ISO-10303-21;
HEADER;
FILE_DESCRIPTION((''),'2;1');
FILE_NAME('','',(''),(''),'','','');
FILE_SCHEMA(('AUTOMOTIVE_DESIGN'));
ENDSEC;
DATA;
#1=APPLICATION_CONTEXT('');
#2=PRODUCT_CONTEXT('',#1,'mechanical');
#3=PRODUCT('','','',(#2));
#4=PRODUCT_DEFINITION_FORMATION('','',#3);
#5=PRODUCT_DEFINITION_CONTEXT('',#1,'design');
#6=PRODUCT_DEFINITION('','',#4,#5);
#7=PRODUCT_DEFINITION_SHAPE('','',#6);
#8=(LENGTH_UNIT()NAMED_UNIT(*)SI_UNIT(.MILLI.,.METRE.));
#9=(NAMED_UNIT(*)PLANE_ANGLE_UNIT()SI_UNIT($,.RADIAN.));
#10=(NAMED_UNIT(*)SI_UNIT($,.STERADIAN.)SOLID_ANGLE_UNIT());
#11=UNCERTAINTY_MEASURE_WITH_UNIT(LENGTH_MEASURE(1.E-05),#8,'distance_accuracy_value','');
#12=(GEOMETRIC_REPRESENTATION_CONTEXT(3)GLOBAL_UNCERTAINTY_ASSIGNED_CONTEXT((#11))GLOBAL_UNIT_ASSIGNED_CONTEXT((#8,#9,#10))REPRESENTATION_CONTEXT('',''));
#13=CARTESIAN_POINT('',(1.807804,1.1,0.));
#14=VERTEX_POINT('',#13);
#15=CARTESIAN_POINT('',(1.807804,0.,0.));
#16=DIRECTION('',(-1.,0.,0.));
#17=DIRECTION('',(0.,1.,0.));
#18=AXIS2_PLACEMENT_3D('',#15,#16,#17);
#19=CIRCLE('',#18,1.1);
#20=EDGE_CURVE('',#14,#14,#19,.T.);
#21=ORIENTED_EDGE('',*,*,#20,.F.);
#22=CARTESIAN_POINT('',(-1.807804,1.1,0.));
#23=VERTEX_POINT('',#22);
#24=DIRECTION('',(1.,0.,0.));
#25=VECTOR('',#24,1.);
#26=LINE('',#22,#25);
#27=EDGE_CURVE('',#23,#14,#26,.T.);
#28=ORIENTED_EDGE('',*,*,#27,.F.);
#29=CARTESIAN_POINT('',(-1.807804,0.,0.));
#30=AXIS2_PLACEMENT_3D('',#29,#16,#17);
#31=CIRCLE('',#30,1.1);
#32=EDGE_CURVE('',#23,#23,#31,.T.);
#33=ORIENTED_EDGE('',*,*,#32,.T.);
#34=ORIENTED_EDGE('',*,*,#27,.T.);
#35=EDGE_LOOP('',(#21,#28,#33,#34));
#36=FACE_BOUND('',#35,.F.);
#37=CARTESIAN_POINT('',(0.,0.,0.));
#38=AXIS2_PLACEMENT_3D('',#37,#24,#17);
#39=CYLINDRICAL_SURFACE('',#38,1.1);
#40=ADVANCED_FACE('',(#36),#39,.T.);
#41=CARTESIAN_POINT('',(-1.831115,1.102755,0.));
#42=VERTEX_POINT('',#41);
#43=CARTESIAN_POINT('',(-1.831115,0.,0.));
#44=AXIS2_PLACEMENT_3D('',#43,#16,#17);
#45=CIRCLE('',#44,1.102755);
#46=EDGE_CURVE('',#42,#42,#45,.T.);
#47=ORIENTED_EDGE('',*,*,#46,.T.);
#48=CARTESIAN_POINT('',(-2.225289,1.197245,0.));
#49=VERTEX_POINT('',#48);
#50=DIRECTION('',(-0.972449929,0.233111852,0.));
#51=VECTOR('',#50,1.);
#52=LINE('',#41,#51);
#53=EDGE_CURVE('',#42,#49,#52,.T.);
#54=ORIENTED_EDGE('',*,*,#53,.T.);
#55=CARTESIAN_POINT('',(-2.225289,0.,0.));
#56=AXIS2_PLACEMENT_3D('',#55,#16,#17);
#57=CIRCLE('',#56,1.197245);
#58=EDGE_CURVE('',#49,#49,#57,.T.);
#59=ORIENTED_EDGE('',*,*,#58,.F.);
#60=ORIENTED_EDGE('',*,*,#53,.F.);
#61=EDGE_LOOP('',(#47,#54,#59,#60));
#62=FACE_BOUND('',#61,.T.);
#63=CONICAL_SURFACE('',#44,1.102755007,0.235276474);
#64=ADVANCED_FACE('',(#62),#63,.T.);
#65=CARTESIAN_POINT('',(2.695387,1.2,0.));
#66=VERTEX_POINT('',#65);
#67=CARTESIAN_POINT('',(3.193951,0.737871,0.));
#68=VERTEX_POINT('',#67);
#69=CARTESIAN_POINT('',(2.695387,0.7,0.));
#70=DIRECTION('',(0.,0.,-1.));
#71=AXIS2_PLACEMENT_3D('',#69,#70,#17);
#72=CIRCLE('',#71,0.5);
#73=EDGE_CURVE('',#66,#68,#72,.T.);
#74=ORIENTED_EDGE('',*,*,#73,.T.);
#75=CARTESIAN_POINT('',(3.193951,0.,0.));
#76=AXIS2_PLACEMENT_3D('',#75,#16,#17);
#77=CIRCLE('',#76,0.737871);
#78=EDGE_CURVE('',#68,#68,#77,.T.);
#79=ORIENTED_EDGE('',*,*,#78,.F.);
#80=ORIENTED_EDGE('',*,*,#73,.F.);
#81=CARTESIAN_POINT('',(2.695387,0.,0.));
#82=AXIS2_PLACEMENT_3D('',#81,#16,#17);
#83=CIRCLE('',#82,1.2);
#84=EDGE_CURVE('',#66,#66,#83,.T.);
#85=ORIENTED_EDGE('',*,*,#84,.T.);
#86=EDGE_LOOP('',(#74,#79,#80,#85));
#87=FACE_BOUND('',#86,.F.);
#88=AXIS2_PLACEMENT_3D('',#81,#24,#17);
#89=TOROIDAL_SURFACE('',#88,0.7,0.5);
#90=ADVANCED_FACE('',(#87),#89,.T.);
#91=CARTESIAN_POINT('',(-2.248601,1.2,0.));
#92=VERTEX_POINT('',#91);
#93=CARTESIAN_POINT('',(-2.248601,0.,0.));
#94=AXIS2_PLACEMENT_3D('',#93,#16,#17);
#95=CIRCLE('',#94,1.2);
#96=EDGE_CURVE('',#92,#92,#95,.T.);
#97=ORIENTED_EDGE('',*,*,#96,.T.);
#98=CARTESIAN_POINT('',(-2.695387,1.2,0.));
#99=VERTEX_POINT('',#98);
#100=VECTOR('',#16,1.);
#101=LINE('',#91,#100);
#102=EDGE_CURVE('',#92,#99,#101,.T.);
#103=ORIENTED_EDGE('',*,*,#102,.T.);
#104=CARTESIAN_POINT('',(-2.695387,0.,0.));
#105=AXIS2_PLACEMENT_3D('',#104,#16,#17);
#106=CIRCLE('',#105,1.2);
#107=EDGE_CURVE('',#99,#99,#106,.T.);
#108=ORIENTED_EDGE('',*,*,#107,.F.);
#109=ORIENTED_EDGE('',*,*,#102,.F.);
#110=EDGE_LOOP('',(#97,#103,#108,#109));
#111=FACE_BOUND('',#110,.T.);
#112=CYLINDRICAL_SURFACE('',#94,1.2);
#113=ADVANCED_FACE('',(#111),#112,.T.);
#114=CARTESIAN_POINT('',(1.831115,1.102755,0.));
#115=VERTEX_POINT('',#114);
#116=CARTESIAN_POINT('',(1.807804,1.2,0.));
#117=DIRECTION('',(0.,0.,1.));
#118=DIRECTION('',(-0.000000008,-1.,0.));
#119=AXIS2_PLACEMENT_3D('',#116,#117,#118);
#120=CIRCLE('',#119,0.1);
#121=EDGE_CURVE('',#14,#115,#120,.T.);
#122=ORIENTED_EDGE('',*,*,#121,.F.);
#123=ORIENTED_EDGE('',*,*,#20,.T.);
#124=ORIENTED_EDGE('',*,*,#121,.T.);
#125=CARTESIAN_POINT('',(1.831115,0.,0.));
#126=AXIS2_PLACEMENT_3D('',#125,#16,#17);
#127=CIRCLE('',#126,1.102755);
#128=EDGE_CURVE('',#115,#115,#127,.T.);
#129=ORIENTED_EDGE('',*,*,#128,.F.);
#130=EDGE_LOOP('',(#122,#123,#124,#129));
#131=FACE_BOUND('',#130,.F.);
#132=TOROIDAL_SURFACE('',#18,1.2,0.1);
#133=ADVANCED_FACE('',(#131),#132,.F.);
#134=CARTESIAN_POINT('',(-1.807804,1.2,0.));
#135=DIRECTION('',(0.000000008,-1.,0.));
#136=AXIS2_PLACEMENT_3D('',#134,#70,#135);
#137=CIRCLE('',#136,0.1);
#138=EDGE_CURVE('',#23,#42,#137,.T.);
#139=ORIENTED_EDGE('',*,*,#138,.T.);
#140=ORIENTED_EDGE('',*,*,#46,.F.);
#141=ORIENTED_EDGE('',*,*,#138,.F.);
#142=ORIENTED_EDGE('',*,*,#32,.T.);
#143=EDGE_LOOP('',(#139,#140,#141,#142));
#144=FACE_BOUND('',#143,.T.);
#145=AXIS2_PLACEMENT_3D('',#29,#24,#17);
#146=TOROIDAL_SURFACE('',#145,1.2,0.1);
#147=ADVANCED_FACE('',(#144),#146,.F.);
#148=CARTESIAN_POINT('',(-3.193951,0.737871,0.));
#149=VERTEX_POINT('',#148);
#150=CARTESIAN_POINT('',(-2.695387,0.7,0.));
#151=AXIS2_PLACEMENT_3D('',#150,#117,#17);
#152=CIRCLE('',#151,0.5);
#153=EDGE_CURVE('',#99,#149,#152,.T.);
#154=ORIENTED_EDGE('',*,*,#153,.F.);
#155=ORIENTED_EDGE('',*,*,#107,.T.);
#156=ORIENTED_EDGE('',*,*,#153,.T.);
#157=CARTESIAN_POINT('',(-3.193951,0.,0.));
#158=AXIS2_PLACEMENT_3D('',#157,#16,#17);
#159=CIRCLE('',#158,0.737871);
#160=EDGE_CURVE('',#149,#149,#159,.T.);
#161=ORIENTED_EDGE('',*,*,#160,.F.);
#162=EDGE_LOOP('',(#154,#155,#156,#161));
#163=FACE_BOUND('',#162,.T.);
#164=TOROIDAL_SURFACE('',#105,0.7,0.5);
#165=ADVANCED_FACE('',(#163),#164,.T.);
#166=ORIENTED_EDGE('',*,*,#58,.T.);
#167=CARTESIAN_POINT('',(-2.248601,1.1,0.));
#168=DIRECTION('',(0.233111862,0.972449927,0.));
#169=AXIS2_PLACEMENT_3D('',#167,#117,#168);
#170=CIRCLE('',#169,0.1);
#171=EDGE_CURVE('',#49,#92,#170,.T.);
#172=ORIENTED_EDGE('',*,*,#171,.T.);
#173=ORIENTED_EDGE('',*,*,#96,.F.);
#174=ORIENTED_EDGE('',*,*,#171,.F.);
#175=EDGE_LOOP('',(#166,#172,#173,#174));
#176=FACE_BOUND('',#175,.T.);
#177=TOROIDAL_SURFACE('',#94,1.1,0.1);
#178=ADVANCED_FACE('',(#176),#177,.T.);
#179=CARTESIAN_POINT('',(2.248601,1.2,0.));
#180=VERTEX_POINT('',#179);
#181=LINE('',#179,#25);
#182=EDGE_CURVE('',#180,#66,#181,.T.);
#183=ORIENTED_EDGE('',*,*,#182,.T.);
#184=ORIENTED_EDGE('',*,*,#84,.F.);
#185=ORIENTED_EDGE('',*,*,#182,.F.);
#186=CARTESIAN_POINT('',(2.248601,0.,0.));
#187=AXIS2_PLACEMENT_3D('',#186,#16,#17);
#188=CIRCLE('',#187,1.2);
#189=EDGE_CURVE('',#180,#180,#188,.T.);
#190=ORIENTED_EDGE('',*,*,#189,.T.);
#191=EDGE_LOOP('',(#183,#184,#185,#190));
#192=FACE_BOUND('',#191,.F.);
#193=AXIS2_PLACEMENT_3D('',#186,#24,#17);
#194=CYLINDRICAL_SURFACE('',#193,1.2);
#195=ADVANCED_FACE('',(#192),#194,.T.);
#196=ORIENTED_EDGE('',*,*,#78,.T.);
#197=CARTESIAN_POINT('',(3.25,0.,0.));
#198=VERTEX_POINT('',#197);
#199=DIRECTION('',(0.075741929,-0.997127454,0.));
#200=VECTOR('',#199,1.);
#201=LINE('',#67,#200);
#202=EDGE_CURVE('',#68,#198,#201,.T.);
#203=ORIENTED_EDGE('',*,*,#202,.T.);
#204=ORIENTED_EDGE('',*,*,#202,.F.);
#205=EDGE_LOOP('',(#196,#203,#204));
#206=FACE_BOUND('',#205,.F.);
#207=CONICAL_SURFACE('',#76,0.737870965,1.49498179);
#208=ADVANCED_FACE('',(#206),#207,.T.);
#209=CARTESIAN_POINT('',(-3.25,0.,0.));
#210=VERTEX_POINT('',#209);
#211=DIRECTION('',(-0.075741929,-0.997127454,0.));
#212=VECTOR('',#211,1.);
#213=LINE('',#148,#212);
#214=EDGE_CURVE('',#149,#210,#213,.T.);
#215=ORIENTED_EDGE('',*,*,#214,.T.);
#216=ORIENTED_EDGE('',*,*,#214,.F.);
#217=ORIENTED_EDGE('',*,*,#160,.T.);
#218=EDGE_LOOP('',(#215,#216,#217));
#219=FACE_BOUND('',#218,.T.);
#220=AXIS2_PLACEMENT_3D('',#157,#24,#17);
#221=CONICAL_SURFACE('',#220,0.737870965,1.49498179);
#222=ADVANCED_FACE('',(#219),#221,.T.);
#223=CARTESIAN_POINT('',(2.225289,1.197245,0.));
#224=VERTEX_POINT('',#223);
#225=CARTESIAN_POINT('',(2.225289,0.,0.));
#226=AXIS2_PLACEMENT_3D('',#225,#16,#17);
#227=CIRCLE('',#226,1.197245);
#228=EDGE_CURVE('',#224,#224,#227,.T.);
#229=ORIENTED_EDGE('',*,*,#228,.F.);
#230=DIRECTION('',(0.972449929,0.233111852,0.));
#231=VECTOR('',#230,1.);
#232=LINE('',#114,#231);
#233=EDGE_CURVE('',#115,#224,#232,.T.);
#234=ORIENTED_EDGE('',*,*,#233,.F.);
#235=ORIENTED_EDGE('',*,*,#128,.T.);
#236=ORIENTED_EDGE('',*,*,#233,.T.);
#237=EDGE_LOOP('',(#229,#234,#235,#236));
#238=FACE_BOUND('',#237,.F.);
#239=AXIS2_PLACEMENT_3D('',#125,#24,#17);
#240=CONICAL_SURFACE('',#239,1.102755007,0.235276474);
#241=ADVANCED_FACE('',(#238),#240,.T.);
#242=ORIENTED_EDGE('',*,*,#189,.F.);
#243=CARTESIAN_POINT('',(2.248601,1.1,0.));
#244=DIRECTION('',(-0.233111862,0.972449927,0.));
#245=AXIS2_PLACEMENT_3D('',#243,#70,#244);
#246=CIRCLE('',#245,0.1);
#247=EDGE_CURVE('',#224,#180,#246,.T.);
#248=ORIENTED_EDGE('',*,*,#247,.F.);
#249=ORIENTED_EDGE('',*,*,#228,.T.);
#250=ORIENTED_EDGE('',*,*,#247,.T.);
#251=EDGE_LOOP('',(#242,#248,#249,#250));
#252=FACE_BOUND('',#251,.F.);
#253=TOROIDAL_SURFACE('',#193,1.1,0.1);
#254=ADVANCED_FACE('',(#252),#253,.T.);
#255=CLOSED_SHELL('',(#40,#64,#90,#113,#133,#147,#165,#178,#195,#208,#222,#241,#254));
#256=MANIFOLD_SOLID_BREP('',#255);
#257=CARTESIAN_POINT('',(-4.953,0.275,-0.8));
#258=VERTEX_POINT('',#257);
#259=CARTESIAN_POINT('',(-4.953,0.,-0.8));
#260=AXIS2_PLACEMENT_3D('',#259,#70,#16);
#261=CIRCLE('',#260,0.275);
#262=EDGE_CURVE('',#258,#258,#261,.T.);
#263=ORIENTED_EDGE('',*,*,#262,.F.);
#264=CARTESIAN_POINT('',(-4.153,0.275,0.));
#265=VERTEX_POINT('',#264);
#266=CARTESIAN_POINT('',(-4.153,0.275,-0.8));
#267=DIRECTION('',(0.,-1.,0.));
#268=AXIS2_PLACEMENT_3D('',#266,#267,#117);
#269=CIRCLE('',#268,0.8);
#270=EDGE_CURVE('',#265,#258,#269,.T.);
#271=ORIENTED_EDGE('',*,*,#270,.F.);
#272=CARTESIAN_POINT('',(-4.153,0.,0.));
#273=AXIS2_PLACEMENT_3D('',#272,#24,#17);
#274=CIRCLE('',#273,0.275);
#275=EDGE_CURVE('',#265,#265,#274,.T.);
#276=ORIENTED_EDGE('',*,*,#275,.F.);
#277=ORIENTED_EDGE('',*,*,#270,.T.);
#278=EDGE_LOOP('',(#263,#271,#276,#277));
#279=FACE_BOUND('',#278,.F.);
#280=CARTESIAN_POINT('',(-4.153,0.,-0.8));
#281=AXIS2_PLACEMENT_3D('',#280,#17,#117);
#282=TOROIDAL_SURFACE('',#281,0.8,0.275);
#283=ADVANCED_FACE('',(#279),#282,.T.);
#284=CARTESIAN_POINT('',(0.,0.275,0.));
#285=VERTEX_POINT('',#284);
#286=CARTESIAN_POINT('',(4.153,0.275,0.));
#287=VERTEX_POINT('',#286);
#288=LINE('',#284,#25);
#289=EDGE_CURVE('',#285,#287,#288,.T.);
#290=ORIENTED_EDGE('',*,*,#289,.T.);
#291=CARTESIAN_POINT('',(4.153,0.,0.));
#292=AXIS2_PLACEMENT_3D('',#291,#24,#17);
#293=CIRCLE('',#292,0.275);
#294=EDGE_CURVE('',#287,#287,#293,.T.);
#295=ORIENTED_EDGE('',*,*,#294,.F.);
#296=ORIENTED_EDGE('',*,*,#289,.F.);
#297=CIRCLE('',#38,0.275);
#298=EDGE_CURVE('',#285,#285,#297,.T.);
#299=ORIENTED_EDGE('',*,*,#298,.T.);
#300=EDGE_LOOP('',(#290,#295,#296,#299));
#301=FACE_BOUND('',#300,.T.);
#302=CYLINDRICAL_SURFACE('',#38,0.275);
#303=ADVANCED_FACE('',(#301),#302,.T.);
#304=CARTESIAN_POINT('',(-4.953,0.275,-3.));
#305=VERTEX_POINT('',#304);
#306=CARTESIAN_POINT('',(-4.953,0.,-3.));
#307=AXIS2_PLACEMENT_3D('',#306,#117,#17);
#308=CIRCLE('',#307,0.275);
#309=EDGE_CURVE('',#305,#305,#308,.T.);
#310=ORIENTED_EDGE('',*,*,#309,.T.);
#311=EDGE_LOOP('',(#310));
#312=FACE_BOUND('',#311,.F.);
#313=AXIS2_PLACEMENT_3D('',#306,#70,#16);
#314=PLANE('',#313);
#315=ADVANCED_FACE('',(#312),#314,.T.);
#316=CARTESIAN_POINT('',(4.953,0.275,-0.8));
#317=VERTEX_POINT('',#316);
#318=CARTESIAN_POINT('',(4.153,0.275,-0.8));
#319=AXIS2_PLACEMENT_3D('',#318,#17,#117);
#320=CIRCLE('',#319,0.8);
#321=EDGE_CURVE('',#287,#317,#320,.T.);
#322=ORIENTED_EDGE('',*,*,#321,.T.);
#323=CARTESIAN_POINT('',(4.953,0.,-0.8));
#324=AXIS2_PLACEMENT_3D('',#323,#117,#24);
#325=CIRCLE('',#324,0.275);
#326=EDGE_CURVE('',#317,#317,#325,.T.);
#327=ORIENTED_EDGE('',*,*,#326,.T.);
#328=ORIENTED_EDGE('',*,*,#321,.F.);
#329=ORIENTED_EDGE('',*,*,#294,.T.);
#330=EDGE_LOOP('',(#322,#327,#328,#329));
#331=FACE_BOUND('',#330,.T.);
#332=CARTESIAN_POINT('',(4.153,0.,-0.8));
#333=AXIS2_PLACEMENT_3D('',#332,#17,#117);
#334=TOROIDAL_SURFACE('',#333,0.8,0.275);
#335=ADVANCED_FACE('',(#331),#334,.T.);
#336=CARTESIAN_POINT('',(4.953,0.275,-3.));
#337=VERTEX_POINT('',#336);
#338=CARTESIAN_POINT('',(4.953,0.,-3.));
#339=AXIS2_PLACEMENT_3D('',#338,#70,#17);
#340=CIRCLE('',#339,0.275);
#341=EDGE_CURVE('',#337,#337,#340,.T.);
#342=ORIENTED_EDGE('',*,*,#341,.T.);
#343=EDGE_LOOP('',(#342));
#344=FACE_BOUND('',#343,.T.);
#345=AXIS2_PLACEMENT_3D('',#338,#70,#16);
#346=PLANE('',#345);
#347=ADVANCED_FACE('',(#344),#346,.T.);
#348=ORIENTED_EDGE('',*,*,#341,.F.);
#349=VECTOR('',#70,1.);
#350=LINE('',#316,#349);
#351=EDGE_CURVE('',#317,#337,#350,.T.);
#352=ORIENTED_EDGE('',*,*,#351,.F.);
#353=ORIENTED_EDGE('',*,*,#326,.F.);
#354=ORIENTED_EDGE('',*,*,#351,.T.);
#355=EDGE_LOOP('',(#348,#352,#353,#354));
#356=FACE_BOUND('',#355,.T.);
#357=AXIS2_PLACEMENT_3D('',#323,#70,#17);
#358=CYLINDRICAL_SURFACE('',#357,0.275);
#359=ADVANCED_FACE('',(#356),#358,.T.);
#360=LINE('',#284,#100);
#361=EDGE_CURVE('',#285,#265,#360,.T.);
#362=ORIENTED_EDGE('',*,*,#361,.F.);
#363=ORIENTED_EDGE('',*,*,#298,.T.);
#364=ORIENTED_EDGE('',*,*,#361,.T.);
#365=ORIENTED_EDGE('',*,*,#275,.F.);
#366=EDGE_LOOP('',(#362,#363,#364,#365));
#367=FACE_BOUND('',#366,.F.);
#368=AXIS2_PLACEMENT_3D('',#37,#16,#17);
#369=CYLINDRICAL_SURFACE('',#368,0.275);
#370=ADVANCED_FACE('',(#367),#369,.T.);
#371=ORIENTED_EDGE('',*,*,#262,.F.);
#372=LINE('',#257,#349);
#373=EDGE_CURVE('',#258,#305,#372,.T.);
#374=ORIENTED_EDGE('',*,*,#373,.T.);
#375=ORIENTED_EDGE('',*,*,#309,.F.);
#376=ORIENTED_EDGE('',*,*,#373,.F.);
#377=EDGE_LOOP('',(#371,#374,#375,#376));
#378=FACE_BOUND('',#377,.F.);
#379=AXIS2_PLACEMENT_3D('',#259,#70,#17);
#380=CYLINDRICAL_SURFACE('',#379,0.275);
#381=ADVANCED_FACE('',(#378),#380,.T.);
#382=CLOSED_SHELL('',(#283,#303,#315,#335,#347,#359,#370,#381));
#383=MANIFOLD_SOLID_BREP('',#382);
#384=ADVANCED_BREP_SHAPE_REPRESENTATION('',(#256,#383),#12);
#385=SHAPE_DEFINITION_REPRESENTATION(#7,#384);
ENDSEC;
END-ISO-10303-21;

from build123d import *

# Parameters (mm, degrees)
F3_R = 0.275


with BuildPart() as f1:
    # F0 (on Top) → F1 (revolve)
    with BuildSketch(Plane.XY):
        with BuildLine():
            Line((-3.1939512269, 0.7378709646), (-3.25, 0))
            Line((-3.25, 0), (0, 0))
            Line((0, 0), (0, 1.1))
            Line((0, 1.1), (-1.8078035141, 1.1))
            ThreePointArc((-1.8078035141, 1.1), (-1.8195402238, 1.1006911401), (-1.8311146993, 1.1027550071))
            Line((-1.8311146993, 1.1027550071), (-2.2252893382, 1.1972449929))
            ThreePointArc((-2.2252893382, 1.1972449929), (-2.2368638136, 1.1993088599), (-2.2486005233, 1.2))
            Line((-2.2486005233, 1.2), (-2.6953874998, 1.2))
            ThreePointArc((-2.6953874998, 1.2), (-3.0352878658, 1.0666984335), (-3.1939512269, 0.7378709646))
        make_face()
    revolve(axis=Axis((-1.625, 0, 0), (-1, 0, 0)))

    # F2: F1 across face


with BuildPart() as f1_1:
    add(f1.part)
    add(f1.part.mirror(Plane.YZ))


with BuildPart() as f5:
    # F5: sweep along a path in F4
    with BuildLine(Plane.XZ) as f5_path:
        Line((0, 0), (4.153, 0))
        ThreePointArc((4.153, 0), (4.7186854249, -0.2343145751), (4.953, -0.8))
        Line((4.953, -0.8), (4.953, -3))
    # F3 (on Right) → F5 (sweep)
    with BuildSketch(Plane.YZ):
        Circle(F3_R)
    sweep(path=f5_path.line)

    # F6: F5 across plane


with BuildPart() as f5_1:
    add(f5.part)
    add(f5.part.mirror(Plane.YZ))


solid = Compound([f1_1.part, f5_1.part])
